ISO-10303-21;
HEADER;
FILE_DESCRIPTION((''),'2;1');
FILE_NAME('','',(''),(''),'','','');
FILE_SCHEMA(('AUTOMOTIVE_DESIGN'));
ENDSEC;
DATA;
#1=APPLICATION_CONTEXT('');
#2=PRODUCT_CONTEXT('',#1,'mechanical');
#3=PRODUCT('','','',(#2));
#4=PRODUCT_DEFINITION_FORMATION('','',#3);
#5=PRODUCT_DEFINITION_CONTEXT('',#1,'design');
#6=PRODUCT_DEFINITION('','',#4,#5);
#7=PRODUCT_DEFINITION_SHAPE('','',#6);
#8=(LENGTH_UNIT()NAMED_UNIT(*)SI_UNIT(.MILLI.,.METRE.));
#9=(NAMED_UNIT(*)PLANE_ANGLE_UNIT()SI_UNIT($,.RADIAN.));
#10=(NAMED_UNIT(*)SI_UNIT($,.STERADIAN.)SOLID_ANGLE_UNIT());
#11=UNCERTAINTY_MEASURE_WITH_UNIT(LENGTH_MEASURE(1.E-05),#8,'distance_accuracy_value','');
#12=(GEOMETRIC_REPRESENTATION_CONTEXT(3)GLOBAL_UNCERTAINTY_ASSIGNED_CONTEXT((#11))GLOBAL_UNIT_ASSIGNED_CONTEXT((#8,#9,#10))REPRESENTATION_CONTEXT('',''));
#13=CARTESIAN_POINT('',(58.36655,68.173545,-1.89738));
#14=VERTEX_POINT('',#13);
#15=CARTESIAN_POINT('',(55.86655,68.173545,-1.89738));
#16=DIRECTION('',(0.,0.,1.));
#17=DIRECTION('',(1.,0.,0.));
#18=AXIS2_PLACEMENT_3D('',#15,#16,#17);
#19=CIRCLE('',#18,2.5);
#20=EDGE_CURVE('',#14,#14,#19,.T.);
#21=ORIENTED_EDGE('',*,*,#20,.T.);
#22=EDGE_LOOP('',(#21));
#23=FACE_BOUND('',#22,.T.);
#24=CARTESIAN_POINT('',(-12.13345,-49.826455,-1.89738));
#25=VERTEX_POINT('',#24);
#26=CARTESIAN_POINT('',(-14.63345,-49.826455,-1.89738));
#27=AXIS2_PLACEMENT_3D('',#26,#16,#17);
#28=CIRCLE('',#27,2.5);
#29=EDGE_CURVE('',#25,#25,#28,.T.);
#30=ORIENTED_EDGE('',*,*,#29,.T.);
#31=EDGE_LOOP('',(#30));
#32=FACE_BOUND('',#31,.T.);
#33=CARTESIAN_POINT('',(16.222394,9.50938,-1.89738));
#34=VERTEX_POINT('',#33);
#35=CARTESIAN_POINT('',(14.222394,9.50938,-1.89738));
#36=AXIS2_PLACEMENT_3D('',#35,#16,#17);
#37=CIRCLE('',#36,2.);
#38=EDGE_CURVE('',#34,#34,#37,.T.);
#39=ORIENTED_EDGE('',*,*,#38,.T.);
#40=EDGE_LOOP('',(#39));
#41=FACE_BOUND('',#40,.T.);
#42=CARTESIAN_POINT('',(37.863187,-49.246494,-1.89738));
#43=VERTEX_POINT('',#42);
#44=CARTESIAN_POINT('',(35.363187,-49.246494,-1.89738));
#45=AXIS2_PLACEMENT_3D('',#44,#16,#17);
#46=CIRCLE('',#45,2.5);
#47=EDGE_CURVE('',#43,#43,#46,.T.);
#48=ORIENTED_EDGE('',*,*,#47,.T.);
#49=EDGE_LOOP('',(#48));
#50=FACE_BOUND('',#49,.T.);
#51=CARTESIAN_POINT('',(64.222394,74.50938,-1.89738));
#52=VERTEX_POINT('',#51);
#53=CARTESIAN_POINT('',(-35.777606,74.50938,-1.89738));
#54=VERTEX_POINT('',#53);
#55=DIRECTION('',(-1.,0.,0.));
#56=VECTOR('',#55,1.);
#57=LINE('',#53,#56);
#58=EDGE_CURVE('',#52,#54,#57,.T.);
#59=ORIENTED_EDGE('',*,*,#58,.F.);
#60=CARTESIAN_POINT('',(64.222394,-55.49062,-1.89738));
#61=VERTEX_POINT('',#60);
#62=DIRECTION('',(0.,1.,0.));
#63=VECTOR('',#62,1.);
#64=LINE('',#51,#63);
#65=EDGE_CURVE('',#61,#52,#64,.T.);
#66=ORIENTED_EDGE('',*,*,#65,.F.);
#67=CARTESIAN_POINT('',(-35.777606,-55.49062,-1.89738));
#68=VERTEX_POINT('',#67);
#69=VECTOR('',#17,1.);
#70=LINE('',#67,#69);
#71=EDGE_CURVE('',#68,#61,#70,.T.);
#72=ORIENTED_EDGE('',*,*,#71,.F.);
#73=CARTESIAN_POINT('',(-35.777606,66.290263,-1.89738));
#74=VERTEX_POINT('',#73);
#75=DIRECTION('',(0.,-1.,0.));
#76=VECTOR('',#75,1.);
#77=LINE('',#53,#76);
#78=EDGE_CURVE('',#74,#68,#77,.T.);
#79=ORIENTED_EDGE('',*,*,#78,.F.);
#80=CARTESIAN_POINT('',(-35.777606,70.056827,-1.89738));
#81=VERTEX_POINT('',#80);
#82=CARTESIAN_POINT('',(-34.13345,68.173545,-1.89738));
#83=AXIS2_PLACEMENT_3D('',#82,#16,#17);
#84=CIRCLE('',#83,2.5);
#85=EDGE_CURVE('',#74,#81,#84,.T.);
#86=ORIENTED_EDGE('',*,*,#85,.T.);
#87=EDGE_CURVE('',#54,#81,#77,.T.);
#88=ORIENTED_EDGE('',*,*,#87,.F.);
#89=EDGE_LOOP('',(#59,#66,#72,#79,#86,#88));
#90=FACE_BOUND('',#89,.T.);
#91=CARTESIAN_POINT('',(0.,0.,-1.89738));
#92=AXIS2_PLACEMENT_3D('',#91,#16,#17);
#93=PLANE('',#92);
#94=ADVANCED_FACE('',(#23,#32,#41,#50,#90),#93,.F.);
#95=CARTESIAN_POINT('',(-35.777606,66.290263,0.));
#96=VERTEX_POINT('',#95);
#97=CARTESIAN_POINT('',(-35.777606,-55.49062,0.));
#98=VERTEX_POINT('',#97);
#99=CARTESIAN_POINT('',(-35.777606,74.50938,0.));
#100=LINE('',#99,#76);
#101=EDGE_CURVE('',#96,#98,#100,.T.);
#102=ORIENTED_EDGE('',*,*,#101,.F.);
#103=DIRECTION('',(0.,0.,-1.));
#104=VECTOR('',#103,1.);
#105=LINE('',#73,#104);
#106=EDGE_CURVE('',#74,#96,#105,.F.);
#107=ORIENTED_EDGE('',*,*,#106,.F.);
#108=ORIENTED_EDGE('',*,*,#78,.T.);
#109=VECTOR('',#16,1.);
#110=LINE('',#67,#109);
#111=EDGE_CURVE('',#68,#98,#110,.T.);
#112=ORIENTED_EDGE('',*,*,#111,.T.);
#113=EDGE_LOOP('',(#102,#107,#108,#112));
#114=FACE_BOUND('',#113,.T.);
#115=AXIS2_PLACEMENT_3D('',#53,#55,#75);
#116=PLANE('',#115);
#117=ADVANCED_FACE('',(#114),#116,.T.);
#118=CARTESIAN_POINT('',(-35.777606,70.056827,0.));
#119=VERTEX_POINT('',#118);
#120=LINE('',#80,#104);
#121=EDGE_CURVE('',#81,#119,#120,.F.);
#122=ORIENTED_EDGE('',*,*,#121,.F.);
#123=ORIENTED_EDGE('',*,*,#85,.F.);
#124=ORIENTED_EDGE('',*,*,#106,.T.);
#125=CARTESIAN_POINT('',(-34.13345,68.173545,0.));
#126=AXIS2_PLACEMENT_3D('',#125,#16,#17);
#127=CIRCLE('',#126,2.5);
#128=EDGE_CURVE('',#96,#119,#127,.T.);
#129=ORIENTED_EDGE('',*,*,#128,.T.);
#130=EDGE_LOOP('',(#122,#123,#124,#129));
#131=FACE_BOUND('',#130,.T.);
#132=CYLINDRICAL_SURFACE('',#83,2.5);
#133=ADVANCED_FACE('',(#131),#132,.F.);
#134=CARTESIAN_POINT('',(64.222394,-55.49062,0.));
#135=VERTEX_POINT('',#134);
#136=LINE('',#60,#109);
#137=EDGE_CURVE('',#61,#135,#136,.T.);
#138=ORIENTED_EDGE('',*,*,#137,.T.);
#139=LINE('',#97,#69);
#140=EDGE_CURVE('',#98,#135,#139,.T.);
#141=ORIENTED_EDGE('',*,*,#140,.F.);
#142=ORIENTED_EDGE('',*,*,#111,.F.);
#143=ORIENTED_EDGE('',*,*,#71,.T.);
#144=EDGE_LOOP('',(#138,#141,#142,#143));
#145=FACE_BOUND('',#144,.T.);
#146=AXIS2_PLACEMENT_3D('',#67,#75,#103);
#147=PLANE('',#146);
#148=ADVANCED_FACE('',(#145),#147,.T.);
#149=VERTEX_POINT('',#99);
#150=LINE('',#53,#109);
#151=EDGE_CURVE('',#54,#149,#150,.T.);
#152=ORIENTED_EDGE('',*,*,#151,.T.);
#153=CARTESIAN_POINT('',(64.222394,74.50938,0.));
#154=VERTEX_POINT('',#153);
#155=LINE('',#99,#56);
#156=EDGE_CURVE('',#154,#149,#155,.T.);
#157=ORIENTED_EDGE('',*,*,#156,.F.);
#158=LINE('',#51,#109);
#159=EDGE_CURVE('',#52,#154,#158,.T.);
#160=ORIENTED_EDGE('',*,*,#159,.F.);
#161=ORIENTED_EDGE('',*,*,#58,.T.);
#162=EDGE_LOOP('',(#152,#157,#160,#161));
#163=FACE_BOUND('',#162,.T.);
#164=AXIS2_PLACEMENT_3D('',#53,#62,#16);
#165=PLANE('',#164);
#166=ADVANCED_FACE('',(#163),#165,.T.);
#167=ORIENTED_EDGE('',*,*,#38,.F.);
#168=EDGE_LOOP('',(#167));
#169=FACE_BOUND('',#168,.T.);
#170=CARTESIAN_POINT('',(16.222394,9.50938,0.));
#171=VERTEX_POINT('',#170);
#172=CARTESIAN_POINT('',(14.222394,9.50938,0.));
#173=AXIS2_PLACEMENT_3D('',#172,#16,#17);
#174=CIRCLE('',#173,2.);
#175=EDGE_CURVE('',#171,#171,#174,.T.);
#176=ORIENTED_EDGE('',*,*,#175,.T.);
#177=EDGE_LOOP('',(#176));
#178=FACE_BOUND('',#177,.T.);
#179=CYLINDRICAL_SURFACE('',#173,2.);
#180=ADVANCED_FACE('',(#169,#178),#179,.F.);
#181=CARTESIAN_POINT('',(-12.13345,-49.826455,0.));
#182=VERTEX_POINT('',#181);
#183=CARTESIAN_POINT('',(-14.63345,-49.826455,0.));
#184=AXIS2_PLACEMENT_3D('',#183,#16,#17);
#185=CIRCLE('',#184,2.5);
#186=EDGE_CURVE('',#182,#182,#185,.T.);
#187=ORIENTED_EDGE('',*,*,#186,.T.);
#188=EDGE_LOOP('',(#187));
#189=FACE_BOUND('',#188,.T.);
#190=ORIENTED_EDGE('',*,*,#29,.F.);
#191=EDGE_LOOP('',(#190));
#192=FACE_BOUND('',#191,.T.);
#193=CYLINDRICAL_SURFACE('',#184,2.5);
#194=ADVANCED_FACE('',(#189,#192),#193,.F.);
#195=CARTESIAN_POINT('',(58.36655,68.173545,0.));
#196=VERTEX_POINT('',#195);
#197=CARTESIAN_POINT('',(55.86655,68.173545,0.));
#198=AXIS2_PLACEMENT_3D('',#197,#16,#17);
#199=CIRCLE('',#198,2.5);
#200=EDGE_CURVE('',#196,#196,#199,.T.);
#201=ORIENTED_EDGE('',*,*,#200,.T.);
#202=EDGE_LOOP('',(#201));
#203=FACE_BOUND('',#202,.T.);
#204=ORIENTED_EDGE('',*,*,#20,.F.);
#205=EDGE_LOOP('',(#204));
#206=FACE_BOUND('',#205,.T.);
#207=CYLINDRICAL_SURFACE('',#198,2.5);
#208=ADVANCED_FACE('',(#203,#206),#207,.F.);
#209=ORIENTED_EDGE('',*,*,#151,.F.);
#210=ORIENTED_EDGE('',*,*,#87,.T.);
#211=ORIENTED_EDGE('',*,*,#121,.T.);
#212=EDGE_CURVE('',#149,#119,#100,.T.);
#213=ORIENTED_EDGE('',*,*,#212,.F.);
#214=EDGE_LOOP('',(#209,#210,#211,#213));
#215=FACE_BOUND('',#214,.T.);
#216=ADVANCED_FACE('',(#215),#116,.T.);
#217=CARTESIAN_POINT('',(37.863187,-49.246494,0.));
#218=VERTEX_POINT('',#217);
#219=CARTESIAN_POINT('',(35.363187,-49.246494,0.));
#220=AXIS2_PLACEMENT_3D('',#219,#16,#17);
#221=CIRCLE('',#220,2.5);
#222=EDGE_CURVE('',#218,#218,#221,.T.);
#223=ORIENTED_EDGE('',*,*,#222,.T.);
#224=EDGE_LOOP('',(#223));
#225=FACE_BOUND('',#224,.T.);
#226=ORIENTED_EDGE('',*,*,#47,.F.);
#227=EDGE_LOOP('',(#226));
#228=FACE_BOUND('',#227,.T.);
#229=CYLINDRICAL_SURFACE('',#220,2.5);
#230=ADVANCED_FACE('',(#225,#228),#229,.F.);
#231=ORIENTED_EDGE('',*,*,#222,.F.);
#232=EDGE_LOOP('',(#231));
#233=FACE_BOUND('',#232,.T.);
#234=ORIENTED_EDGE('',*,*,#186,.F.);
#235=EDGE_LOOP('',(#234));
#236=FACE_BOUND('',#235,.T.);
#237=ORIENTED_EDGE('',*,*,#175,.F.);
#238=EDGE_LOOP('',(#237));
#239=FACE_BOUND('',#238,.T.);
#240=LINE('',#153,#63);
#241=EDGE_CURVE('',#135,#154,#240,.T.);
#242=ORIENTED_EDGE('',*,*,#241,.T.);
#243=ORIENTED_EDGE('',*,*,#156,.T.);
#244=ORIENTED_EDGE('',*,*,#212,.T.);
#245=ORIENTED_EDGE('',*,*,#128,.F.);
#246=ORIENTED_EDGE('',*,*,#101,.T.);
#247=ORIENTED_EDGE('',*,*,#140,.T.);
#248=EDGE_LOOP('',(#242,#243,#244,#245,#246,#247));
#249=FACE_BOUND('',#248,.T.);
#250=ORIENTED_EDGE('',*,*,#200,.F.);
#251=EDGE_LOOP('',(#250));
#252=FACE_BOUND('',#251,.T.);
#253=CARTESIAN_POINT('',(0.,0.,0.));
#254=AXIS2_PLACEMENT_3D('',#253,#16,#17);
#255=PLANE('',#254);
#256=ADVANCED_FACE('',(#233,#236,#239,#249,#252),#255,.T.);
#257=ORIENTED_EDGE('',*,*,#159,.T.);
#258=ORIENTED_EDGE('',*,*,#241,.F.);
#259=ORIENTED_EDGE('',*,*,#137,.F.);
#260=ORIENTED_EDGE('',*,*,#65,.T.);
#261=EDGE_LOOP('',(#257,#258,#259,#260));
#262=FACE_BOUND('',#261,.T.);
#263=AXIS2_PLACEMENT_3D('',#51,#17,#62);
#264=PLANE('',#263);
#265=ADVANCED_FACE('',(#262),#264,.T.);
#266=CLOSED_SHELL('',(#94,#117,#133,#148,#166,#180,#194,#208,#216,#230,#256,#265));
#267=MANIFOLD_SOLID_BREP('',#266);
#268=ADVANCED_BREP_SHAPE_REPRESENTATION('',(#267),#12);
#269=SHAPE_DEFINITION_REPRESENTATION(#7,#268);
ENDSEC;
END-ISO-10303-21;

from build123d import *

# Parameters (mm, degrees)
SKETCH1_W          = 100
SKETCH1_H          = 130
BASE_FLANGE1_DEPTH = 1.89738
SKETCH6_R          = 2.5
SKETCH6_R_2        = 2
CUT_EXTRUDE1_DEPTH = 2


# Sheet-metal steps are written as plain solids
with BuildPart() as part:
    # Sketch1 → Base-Flange1 (new body)
    with BuildSketch(Plane.XY):
        with Locations((14.222394098, 9.509380067)):
            Rectangle(SKETCH1_W, SKETCH1_H)
    extrude(amount=-BASE_FLANGE1_DEPTH)

    # Sketch6 → Cut-Extrude1 (cut)
    with BuildSketch(Plane.XY):
        with Locations((-34.133449647, 68.173545131)):
            Circle(SKETCH6_R)
        with Locations((55.866550353, 68.173545131)):
            Circle(SKETCH6_R)
        with Locations((35.363186693, -49.246493887)):
            Circle(SKETCH6_R)
        with Locations((-14.633449647, -49.826454869)):
            Circle(SKETCH6_R)
        with Locations((14.222394098, 9.509380067)):
            Circle(SKETCH6_R_2)
    extrude(amount=-CUT_EXTRUDE1_DEPTH, mode=Mode.SUBTRACT)


solid = part.part
